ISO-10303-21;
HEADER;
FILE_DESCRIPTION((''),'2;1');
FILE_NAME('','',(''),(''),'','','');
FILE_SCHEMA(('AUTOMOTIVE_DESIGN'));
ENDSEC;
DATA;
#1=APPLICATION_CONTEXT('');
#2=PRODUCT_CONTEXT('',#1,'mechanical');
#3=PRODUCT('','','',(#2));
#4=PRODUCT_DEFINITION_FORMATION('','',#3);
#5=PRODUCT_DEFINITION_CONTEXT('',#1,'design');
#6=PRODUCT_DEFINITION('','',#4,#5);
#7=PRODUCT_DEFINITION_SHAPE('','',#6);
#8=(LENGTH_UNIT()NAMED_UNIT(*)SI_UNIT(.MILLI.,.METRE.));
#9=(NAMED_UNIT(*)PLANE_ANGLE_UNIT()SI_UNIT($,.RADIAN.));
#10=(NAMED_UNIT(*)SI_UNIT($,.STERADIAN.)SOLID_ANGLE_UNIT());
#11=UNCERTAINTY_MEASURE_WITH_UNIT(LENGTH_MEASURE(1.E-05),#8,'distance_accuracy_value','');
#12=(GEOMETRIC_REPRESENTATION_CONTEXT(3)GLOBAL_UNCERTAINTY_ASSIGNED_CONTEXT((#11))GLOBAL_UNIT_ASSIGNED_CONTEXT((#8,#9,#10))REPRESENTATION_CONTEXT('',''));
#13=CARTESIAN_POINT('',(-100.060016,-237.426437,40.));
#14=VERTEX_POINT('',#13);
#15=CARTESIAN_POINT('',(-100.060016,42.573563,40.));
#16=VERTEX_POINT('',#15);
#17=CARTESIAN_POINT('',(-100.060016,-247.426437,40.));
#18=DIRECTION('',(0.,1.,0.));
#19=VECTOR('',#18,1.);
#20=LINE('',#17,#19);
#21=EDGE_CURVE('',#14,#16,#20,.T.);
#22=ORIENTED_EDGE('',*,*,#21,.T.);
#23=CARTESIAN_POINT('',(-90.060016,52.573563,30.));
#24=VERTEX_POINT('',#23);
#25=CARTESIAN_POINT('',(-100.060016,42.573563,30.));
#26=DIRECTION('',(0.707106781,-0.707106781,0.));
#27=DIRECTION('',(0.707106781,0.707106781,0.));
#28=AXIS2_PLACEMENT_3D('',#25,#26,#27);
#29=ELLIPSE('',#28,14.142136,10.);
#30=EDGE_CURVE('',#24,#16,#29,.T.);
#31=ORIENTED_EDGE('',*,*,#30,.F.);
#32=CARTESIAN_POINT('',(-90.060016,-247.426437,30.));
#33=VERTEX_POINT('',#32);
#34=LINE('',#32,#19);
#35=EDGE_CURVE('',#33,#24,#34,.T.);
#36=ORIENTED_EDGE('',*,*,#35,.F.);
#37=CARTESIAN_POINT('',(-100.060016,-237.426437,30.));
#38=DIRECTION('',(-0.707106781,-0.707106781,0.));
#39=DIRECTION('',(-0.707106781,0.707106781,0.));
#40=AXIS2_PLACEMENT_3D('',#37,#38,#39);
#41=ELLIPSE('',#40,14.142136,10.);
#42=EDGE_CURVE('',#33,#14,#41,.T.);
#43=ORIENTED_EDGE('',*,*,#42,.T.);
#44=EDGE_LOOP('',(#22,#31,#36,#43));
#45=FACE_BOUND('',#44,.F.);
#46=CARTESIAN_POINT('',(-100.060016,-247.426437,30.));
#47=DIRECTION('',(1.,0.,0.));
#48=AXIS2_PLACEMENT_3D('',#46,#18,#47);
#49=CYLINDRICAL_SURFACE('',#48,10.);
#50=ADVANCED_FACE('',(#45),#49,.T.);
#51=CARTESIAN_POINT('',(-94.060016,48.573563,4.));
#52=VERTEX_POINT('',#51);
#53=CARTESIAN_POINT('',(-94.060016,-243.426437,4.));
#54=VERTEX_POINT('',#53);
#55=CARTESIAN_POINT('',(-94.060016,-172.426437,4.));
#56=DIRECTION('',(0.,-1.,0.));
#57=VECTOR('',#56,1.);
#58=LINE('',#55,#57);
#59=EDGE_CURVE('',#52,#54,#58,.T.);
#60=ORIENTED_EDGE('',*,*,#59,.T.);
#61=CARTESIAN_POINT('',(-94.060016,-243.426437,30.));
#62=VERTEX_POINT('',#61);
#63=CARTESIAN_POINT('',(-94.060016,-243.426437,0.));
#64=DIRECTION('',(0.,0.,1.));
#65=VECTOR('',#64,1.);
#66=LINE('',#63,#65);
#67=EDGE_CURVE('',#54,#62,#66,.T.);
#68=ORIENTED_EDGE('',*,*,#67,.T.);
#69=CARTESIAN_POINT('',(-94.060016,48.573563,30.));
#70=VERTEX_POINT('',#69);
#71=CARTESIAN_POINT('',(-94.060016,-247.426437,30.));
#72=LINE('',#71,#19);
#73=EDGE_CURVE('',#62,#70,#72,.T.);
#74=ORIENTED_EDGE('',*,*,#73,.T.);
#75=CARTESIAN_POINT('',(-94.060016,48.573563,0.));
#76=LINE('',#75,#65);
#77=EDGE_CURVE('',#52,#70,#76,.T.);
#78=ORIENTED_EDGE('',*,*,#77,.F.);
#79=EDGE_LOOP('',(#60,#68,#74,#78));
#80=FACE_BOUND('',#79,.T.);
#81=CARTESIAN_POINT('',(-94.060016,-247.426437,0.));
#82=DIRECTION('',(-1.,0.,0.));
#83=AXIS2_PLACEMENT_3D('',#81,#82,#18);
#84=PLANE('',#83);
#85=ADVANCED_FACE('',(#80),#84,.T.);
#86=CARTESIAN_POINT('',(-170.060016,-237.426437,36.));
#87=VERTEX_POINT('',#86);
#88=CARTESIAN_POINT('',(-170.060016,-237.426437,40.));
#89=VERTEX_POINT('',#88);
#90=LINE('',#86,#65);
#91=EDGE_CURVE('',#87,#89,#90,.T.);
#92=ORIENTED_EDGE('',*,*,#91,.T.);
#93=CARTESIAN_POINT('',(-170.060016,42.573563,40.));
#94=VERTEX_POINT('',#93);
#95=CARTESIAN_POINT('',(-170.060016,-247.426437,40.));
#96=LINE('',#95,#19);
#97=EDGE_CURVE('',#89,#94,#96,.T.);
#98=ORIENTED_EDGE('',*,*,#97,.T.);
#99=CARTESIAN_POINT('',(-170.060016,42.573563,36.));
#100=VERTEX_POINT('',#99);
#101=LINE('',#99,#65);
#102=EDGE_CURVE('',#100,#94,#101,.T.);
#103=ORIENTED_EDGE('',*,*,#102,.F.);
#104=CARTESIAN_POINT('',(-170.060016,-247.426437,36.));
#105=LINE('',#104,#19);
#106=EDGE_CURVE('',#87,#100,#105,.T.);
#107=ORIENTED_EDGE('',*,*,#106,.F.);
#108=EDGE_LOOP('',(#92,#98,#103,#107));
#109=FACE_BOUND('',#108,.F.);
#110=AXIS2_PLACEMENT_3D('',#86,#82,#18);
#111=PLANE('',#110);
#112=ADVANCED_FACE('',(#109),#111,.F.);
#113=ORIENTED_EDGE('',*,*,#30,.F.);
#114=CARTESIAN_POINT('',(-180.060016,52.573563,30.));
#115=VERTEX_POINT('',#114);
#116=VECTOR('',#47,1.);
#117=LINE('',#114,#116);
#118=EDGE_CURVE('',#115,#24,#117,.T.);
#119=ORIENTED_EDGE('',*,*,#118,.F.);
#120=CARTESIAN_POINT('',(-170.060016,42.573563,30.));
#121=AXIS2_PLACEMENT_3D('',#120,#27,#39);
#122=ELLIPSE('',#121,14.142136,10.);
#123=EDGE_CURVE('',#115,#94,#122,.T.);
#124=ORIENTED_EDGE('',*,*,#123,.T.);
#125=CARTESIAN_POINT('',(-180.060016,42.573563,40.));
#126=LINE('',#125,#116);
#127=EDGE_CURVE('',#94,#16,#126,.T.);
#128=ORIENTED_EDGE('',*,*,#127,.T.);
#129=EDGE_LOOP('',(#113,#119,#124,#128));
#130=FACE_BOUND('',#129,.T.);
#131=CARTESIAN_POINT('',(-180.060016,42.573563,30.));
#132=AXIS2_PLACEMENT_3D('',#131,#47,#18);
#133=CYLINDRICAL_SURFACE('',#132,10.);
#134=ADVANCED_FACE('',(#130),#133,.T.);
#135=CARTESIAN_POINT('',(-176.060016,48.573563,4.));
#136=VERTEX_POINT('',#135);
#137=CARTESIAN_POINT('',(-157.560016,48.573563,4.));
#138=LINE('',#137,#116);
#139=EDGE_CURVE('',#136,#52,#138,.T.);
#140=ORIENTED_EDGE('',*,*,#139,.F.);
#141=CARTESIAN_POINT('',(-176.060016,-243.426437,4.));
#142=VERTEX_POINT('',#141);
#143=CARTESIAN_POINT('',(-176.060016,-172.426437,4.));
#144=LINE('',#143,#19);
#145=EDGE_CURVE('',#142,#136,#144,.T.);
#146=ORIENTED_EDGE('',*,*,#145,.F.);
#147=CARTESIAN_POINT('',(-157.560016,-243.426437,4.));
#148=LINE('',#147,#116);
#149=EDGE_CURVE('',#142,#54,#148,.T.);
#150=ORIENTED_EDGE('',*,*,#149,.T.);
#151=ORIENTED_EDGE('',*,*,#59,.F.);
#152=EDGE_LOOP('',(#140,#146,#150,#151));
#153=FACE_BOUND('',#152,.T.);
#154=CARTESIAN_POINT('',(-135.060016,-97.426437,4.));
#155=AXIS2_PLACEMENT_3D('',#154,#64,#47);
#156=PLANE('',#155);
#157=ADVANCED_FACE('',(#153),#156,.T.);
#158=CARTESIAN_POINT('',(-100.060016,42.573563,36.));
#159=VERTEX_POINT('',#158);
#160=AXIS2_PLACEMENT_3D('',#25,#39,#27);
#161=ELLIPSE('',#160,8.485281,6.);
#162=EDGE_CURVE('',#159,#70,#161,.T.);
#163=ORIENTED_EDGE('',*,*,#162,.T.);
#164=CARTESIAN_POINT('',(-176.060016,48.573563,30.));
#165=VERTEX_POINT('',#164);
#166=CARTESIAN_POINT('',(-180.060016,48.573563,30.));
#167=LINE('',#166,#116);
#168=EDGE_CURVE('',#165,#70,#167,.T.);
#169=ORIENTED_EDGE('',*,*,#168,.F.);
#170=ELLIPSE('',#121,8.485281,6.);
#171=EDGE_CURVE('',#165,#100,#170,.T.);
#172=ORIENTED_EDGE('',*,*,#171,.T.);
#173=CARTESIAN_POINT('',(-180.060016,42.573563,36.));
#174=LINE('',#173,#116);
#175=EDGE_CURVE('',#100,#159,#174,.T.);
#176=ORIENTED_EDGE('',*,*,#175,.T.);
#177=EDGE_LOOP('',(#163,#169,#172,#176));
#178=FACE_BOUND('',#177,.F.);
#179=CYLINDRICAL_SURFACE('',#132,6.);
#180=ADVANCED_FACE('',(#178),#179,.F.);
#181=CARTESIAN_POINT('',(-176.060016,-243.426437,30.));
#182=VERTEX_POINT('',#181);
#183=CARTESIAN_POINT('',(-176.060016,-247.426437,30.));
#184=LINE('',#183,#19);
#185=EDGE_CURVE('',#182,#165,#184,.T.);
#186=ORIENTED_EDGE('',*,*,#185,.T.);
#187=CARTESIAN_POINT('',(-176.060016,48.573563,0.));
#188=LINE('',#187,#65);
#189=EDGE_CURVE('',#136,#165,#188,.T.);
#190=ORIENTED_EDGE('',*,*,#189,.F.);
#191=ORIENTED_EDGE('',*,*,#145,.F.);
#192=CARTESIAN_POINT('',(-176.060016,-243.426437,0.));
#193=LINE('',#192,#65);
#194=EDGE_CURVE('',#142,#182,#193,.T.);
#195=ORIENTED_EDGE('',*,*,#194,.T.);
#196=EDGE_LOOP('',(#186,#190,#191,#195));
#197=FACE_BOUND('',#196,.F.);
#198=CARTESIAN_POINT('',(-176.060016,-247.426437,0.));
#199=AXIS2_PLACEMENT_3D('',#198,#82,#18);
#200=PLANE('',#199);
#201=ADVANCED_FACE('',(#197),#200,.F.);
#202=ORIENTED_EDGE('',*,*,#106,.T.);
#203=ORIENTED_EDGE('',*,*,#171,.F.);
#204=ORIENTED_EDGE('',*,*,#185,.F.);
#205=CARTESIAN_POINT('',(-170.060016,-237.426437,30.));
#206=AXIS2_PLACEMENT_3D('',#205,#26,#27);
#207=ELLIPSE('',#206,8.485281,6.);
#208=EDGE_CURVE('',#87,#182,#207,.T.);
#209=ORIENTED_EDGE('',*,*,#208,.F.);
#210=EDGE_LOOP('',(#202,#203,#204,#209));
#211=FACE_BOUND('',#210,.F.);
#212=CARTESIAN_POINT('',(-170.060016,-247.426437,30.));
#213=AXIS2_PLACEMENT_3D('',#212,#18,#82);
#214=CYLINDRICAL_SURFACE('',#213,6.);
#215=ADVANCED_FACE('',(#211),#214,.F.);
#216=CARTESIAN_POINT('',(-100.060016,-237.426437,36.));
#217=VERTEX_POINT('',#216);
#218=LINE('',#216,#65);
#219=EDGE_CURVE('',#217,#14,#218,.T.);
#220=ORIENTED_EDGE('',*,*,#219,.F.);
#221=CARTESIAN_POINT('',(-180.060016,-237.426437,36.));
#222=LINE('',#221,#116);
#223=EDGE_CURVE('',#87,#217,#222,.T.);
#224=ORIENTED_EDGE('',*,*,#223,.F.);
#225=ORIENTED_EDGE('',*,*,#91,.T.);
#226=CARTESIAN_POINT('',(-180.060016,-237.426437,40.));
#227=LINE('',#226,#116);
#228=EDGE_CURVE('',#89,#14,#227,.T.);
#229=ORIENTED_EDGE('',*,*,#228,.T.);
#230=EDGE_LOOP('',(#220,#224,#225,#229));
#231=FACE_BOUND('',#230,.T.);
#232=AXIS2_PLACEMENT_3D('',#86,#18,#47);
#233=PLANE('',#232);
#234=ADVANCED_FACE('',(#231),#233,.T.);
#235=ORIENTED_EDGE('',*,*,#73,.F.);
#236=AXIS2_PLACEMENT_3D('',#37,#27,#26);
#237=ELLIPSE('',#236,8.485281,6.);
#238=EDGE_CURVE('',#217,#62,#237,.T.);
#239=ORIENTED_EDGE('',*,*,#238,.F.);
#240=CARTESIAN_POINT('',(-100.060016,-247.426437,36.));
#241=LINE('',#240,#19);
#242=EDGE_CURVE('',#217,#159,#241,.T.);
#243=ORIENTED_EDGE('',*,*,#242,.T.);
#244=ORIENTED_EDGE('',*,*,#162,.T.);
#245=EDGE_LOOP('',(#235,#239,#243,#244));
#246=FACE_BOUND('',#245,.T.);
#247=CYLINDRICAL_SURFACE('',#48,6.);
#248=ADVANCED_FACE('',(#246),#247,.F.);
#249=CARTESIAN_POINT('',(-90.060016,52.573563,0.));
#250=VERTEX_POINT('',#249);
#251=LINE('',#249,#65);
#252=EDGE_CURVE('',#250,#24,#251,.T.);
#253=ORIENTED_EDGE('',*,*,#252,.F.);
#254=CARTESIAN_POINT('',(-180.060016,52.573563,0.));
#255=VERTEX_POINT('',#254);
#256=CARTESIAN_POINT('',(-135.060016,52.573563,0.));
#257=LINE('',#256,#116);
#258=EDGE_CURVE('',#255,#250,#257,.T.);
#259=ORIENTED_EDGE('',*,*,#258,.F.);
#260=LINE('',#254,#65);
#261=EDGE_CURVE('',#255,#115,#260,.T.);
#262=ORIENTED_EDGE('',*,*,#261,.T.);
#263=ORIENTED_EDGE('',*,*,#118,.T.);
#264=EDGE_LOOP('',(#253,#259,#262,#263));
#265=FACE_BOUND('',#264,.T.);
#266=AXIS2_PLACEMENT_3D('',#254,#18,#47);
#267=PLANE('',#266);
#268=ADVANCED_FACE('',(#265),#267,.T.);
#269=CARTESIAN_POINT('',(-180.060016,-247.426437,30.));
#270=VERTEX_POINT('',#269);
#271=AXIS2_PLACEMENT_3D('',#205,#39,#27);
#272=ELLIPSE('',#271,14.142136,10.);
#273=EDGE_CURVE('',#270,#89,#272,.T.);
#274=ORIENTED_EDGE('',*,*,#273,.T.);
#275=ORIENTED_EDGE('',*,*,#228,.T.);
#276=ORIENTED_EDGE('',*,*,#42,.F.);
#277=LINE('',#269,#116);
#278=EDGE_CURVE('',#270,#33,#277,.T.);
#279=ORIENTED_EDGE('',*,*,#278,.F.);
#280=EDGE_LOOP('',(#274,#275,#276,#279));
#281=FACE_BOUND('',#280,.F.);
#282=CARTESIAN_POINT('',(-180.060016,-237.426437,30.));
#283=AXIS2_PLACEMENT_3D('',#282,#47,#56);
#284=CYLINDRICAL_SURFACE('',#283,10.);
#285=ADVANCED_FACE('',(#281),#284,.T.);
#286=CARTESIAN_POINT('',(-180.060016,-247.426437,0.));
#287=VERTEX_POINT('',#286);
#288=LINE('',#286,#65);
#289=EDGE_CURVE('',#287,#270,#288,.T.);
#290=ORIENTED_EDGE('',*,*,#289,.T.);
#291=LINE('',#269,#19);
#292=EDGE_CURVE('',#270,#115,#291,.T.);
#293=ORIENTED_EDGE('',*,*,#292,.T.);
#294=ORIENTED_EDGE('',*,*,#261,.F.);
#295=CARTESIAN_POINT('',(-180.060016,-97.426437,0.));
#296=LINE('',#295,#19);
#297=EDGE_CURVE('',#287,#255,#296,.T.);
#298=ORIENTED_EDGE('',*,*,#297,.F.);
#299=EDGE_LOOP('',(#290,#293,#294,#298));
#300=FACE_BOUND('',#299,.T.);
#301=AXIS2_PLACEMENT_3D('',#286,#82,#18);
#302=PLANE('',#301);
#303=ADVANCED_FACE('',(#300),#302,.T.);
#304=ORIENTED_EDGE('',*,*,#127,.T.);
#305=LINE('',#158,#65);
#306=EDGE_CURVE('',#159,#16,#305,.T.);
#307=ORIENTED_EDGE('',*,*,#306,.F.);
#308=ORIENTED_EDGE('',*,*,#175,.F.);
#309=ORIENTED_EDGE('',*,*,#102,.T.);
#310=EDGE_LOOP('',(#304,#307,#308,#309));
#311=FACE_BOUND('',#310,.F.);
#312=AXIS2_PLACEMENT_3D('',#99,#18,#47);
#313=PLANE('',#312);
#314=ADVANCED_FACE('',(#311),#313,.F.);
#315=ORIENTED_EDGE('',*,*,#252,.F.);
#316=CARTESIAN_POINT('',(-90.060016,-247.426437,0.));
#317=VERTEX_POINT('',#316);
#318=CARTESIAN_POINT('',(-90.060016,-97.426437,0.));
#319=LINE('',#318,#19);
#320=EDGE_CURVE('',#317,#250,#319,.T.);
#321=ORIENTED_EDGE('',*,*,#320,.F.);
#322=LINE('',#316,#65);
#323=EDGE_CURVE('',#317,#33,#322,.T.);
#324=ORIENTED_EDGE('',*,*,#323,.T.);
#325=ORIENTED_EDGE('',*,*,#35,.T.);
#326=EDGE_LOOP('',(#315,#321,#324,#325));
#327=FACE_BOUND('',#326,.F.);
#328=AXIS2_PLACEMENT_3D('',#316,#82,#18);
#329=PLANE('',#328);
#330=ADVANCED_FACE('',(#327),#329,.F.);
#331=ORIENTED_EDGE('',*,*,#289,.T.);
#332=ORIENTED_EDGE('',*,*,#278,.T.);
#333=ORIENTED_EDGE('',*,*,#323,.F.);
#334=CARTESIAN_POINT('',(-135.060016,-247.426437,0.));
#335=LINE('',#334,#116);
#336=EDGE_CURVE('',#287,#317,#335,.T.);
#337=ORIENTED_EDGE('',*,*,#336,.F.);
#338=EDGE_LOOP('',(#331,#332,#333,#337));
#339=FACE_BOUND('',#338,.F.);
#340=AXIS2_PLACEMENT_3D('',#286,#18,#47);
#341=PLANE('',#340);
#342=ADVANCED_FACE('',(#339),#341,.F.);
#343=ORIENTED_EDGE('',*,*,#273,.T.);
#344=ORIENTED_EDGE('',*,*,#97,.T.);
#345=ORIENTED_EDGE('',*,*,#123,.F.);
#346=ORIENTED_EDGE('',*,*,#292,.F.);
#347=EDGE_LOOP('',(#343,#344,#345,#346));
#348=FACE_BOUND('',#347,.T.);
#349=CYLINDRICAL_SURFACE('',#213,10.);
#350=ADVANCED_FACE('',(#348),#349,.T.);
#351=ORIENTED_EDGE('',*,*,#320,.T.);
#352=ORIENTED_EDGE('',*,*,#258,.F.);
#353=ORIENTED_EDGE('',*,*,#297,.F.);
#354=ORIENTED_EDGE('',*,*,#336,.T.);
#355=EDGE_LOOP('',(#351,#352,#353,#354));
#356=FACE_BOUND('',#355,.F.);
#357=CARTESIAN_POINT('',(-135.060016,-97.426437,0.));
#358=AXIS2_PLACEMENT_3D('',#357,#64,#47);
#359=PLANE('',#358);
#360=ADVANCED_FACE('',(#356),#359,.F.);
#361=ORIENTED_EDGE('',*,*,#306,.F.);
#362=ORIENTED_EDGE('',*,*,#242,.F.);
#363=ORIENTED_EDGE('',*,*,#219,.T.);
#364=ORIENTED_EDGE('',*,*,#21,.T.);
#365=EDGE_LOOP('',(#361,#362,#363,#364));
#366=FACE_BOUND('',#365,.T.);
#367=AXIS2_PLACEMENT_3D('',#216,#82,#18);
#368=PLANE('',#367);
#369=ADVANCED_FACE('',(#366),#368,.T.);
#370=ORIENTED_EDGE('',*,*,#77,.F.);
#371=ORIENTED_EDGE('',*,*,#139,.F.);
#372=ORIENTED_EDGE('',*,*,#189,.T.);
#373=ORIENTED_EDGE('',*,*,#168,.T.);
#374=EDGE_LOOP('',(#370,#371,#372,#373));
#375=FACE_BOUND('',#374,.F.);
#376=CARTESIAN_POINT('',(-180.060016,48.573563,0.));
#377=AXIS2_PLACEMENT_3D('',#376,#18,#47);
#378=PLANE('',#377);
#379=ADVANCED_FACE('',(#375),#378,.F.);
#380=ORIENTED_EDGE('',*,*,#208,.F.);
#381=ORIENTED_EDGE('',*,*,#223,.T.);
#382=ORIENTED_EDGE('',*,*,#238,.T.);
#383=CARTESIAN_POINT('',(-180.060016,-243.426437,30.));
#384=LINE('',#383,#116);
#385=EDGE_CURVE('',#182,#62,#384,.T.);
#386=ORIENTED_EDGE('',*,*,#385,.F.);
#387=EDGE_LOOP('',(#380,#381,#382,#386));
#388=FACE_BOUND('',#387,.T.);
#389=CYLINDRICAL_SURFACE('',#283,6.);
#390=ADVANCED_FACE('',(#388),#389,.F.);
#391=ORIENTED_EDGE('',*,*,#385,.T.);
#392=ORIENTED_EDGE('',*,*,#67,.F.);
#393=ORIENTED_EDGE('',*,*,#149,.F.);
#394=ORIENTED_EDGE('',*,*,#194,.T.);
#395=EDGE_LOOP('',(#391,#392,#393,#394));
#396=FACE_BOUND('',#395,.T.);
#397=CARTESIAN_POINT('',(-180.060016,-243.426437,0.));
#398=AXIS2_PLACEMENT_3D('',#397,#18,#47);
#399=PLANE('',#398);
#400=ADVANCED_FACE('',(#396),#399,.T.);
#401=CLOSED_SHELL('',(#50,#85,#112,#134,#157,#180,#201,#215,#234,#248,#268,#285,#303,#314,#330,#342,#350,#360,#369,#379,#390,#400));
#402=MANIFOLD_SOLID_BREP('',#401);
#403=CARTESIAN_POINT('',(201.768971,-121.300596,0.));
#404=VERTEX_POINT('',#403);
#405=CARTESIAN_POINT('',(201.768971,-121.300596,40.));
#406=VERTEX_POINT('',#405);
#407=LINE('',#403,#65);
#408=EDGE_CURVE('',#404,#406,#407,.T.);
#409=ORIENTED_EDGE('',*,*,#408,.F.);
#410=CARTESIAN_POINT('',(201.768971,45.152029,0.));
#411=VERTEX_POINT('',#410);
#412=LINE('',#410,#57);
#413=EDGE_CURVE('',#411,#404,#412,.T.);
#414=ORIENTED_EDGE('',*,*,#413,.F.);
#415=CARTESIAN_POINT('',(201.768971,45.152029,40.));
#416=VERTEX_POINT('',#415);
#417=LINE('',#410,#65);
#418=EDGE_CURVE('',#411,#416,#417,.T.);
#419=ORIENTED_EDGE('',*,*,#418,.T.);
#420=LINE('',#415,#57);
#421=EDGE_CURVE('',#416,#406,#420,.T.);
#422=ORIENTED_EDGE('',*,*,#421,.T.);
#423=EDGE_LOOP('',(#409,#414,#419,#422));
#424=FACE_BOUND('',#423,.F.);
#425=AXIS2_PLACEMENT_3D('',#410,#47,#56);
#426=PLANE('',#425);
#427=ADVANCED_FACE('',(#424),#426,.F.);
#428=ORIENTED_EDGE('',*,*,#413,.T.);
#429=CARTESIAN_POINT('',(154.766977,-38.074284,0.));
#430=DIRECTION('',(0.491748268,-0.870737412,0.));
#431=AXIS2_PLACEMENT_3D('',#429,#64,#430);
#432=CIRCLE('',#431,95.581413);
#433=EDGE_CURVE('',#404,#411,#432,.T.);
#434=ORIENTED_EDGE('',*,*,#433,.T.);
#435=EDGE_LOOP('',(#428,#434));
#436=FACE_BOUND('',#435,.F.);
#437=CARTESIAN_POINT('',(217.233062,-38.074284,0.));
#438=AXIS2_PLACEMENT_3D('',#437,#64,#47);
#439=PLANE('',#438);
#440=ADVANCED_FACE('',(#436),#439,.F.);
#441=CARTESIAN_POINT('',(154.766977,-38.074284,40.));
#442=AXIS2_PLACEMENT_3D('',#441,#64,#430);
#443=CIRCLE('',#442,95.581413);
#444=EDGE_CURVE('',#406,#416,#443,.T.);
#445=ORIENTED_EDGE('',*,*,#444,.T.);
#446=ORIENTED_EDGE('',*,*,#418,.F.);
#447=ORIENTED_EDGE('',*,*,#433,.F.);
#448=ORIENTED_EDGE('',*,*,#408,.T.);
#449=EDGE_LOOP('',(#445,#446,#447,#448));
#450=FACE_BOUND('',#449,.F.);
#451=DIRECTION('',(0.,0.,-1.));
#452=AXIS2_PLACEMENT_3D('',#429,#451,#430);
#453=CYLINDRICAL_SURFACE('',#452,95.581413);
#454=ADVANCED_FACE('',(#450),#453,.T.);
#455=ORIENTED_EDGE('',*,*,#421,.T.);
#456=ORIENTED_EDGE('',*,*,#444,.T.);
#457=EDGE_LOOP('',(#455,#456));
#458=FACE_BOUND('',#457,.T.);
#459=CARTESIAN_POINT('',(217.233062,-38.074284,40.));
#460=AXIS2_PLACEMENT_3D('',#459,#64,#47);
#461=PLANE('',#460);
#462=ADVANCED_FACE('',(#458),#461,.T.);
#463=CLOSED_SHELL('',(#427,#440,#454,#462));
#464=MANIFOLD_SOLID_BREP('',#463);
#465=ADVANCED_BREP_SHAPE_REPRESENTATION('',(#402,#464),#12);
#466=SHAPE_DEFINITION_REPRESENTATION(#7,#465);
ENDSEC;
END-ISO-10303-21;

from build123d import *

# Parameters (mm, degrees)
F0_W     = 90
F0_H     = 300
F1_DEPTH = 40
F2_R     = 10
F3_T     = -4
F5_DEPTH = 40


# Not quite as in the source:
# - a shell that OpenCascade refuses in one call is made with other operations: the cavity is built on its own and cut out


with BuildPart() as f1:
    # F0 (on Top) → F1 (new body)
    with BuildSketch(Plane.XY):
        with Locations((-135.0600157978, -97.4264368415)):
            Rectangle(F0_W, F0_H)
    extrude(amount=F1_DEPTH)

    # F2
    f2_edges = [f1.edges().sort_by_distance(p)[0] for p in [
        (-90.060016, -97.426437, 40),
        (-135.060016, -247.426437, 40),
        (-180.060016, -97.426437, 40),
        (-135.060016, 52.573563, 40),
    ]]
    fillet(f2_edges, radius=F2_R)

    # F3: a shell. OpenCascade refuses it in one call, so the cavity is built on its own and cut out:
    # the body offset inwards by the wall thickness, plus a prism from it out through each open face.
    f3_core = offset(f1.part, amount=F3_T, mode=Mode.PRIVATE)
    f3_exits = [f3_core.faces().sort_by_distance(p)[0] for p in [
        (-135.060016, -97.426437, 36),
    ]]
    add(f3_core, mode=Mode.SUBTRACT)
    extrude(f3_exits, amount=-F3_T, mode=Mode.SUBTRACT)


with BuildPart() as f5:
    # F4 (on Top) → F5 (new body)
    with BuildSketch(Plane.XY):
        with BuildLine():
            Line((201.7689708893, 45.1520286221), (201.7689708893, -121.3005959367))
            ThreePointArc((201.7689708893, -121.3005959367), (250.3483896515, -38.0742836573), (201.7689708893, 45.1520286221))
        make_face()
    extrude(amount=F5_DEPTH)


solid = Compound([f1.part, f5.part])
